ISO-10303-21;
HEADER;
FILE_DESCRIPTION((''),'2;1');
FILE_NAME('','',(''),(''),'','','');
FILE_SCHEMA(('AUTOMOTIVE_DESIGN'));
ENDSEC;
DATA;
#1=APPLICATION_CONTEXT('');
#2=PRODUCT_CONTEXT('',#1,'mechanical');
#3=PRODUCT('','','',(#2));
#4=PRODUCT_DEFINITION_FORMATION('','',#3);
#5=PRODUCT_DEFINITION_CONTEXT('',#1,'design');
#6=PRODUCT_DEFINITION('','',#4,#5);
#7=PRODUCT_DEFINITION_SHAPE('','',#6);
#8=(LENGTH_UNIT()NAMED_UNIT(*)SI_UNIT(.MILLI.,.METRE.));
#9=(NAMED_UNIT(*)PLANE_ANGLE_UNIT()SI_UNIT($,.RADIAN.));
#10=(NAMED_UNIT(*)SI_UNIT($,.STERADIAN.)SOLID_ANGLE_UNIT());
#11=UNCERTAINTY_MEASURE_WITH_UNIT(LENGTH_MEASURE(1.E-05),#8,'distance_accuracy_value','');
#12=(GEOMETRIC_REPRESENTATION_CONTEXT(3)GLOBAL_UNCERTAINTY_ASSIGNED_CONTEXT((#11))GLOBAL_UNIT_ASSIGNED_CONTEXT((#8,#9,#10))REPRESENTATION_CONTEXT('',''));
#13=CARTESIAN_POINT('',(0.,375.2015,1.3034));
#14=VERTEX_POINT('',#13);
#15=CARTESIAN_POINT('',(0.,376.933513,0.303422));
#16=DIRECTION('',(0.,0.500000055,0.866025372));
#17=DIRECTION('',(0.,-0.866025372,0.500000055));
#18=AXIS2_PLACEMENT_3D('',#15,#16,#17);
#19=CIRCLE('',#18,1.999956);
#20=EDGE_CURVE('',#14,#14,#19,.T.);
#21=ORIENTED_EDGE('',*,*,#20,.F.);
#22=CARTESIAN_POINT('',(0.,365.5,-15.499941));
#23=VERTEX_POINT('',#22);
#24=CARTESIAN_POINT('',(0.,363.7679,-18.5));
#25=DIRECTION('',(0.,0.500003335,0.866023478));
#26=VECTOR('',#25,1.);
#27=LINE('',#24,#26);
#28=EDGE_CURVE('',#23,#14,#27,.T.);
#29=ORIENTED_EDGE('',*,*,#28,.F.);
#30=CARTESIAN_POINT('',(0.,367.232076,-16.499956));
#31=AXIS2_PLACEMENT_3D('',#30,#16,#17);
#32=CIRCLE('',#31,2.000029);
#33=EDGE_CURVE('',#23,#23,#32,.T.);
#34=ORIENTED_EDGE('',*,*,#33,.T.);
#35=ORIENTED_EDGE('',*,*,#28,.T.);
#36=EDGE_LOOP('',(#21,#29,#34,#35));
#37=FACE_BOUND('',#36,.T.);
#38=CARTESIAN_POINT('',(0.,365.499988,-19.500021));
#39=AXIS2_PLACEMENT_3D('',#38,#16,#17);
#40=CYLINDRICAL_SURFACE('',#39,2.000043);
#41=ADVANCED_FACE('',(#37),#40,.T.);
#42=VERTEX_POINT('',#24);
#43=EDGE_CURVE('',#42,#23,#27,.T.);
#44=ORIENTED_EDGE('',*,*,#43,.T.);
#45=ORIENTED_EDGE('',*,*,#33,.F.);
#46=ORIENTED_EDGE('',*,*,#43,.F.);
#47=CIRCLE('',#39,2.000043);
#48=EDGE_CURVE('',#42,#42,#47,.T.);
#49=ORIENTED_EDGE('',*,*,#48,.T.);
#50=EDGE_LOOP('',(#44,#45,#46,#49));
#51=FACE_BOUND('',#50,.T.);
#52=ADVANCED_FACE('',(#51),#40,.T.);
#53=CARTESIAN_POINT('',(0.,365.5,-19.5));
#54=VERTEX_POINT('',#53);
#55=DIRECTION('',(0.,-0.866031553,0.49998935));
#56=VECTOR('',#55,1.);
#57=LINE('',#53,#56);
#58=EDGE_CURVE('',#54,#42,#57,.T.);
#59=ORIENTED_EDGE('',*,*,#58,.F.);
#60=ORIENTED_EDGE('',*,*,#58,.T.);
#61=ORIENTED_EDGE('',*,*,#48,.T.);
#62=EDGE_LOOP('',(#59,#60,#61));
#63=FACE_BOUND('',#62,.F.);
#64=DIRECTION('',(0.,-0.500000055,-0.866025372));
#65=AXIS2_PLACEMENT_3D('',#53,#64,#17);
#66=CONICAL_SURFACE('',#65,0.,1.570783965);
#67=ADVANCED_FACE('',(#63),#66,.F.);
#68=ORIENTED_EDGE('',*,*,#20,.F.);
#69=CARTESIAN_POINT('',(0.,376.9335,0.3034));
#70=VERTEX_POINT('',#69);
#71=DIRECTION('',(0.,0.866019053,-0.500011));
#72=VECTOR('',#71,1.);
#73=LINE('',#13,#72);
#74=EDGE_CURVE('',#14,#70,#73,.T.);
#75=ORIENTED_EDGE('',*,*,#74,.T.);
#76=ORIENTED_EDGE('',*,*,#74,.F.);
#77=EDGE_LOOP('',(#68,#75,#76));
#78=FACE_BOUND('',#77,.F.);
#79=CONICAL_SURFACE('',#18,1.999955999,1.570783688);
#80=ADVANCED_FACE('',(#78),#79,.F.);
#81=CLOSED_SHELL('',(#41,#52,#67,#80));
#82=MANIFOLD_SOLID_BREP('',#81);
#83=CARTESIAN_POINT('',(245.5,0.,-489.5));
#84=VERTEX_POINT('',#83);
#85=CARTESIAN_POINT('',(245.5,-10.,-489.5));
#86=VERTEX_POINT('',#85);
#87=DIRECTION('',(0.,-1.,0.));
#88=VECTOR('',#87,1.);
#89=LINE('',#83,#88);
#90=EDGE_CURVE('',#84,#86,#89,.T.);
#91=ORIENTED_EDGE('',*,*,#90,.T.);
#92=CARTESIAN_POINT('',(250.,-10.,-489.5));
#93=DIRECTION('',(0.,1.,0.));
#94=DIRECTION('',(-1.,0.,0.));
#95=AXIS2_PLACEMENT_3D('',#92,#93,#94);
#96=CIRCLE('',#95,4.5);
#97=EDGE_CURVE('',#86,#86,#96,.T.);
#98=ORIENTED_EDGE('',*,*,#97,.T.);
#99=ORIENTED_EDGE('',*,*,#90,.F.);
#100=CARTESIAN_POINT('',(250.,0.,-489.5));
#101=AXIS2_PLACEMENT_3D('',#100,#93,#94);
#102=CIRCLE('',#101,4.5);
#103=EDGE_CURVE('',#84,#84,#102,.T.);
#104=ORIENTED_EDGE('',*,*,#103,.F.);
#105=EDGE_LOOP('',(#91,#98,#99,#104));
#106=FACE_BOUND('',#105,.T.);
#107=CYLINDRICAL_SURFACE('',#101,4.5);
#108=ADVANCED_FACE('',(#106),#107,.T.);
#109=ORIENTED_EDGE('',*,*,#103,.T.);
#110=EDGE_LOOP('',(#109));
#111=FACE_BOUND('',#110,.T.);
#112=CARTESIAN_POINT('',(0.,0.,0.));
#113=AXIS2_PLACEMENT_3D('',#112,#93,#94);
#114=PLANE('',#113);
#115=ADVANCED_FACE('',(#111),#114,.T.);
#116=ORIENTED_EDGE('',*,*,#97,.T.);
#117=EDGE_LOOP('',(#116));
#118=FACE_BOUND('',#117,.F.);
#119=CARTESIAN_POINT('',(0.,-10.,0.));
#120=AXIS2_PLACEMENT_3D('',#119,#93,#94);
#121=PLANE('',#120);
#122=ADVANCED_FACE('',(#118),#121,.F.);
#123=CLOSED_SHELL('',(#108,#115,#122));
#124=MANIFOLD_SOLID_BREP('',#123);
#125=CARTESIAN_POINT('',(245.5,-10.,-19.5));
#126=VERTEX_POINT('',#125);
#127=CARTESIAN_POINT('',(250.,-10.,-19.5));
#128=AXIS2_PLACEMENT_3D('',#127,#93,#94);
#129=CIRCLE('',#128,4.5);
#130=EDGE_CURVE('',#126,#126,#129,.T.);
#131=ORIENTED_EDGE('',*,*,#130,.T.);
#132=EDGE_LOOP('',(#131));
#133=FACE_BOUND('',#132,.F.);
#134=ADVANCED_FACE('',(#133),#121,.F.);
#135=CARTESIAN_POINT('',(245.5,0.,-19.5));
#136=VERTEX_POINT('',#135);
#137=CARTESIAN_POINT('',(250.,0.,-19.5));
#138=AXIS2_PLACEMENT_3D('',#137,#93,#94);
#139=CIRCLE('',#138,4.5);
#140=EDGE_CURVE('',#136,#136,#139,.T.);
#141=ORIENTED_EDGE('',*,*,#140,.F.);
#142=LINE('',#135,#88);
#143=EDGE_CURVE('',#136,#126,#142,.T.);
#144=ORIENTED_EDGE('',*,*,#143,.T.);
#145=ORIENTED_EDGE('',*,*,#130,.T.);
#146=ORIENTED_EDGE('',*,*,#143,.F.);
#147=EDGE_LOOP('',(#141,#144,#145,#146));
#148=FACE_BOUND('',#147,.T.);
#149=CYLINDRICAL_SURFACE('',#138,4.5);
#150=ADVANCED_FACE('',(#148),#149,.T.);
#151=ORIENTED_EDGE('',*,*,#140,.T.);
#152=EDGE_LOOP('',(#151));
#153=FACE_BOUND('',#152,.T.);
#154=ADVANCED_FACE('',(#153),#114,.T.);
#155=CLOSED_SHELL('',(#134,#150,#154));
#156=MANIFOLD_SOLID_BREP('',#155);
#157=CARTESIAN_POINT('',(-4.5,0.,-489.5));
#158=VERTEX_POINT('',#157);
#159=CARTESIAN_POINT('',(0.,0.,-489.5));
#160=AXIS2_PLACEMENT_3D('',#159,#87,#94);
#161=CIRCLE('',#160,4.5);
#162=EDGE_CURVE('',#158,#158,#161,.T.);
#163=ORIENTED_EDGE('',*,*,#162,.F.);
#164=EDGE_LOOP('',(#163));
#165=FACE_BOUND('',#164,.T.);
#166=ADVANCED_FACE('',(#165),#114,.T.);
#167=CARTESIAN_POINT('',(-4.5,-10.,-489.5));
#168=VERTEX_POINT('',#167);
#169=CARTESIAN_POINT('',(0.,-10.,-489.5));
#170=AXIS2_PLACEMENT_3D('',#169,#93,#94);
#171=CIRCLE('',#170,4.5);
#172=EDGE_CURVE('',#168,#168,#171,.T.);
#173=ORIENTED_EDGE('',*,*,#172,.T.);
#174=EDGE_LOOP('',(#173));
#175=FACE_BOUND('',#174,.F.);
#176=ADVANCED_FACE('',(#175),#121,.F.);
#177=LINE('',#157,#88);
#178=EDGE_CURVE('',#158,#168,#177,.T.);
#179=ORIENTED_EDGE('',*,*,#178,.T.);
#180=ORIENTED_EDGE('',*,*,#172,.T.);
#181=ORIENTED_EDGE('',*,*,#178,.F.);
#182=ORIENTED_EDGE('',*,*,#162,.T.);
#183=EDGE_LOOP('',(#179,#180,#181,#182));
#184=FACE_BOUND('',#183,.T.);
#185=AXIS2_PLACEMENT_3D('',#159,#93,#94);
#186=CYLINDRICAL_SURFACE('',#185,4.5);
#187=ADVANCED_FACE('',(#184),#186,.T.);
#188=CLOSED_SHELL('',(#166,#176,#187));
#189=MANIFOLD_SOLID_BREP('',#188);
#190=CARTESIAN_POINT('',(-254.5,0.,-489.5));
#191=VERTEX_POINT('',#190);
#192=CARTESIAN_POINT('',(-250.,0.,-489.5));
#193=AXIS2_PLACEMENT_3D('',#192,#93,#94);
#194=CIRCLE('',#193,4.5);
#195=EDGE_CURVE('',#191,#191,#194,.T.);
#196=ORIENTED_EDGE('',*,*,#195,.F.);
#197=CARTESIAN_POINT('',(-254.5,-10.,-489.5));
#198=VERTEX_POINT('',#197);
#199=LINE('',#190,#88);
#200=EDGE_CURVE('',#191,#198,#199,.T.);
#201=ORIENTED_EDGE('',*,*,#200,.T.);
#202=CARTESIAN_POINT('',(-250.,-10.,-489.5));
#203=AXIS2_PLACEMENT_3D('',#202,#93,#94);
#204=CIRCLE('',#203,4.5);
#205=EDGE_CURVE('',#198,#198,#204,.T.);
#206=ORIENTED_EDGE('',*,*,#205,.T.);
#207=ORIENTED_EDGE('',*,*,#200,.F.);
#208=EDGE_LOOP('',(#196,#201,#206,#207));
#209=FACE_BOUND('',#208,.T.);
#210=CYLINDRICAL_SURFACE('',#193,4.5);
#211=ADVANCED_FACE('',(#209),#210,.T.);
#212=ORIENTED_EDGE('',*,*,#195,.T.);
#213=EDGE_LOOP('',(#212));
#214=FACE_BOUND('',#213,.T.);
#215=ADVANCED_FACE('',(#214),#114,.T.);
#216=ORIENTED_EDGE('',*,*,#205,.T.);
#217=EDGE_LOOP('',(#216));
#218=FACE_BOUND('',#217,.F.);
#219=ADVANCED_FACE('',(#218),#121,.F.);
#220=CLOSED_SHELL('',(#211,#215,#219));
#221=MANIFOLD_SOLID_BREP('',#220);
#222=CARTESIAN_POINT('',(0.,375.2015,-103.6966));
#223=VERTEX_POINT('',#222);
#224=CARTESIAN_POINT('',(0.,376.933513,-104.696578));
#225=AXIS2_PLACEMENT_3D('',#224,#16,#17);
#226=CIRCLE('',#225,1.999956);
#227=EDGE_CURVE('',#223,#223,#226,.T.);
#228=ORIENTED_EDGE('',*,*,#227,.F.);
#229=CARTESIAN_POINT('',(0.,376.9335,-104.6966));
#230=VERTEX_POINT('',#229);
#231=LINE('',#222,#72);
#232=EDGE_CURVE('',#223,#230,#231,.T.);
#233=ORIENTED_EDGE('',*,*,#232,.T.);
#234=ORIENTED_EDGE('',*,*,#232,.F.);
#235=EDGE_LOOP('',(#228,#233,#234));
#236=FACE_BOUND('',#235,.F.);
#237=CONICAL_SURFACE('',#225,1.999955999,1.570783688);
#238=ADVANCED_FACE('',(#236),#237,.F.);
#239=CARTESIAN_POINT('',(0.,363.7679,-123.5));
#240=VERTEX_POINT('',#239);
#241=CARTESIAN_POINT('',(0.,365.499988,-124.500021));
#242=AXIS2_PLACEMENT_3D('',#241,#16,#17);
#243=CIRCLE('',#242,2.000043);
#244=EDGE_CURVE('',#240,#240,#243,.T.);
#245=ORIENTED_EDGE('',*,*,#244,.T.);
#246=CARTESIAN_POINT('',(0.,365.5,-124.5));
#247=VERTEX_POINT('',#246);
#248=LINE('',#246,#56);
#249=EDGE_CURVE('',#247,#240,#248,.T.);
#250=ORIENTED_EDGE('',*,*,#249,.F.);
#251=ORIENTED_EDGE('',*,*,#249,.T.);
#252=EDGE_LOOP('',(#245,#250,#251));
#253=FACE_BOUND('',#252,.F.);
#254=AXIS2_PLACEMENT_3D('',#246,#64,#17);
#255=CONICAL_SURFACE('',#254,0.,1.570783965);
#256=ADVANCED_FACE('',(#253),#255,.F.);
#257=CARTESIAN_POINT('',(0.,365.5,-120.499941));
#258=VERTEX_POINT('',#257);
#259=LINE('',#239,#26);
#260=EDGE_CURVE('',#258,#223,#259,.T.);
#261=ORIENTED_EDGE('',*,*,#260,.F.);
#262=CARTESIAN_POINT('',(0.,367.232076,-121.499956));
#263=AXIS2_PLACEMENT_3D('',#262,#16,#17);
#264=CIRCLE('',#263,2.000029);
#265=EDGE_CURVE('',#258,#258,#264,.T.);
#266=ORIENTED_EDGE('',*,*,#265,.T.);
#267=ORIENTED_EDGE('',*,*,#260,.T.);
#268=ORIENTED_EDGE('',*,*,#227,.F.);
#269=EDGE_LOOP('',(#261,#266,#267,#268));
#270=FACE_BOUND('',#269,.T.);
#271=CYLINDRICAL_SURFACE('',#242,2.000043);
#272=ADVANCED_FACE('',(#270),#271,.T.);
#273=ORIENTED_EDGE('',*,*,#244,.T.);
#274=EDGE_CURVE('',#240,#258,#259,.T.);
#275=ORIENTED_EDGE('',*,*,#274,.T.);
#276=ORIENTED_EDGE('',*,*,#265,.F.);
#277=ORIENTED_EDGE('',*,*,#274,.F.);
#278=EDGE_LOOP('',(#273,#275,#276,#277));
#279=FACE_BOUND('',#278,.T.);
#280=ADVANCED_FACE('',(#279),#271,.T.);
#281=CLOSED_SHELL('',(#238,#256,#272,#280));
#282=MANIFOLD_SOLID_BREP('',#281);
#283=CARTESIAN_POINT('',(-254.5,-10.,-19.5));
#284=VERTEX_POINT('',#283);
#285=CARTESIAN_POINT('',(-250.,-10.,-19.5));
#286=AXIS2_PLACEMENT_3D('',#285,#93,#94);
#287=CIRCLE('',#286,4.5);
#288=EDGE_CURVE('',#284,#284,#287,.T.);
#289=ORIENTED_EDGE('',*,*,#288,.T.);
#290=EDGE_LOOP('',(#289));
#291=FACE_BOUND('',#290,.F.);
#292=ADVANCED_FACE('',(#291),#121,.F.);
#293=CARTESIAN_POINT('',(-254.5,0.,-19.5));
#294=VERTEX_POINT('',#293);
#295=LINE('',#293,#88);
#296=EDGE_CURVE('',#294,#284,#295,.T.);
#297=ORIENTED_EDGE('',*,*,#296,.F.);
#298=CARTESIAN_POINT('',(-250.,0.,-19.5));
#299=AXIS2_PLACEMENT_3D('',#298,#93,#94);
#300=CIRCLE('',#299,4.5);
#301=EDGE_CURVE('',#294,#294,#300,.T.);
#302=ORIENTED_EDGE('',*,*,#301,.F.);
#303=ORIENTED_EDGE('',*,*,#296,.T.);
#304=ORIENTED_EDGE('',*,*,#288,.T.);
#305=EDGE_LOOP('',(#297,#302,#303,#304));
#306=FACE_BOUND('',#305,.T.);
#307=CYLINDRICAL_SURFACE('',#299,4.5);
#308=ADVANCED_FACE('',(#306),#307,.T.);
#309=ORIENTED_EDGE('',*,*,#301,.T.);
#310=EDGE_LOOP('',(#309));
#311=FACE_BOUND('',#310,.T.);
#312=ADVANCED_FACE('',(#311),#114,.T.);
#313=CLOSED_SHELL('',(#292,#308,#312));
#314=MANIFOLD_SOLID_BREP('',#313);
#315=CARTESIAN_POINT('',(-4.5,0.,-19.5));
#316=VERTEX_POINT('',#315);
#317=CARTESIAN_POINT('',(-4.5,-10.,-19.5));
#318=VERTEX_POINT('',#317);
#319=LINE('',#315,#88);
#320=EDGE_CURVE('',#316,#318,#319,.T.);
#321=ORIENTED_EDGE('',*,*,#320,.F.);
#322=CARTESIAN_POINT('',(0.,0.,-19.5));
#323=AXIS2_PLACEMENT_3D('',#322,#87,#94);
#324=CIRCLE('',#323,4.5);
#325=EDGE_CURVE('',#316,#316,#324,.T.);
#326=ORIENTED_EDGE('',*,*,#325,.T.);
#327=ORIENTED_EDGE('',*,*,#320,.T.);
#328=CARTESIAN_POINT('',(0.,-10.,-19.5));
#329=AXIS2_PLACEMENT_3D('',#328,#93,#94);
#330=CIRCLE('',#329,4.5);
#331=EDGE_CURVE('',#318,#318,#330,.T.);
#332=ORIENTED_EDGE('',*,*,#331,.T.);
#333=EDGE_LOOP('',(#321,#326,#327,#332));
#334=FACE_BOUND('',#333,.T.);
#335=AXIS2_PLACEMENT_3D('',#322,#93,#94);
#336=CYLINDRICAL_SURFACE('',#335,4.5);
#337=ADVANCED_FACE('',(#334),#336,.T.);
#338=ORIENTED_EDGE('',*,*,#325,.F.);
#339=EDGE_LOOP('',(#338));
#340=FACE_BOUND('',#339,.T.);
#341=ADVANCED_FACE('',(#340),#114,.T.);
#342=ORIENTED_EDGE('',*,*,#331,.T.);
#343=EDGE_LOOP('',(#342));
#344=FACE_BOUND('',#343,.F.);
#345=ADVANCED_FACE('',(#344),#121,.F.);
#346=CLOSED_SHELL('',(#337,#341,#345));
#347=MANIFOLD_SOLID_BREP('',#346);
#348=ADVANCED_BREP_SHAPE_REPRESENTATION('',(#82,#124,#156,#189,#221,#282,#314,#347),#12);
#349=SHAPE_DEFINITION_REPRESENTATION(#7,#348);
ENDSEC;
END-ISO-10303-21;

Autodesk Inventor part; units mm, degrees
ref_plane "YZ Plane" through (0, 0, 0) normal (1, 0, 0) x (0, 1, 0)
ref_plane "XY Plane" through (0, 0, 0) normal (0, 0, 1) x (1, 0, 0)
sketch "S-Orientierung" plane through (0, 0, 0) normal (0, 1, 0) x (-1, 0, 0)
  line L0 (290.75, 0) -> (-290.75, 0)
  line L1 (-290.75, 0) -> (-290.75, -564.4)
  line L2 (-290.75, -564.4) -> (290.75, -564.4)
  line L3 (290.75, -564.4) -> (290.75, 0)
  line L4 (0, -718.1) -> (0, 161.1) construction
  line L5 (-448, 0) -> (448, 0) construction
  line L6 (320, 35.5) -> (-320, 35.5)
  line L7 (-320, 35.5) -> (-320, -592.5)
  line L8 (-320, -592.5) -> (320, -592.5)
  line L9 (320, -592.5) -> (320, 35.5)
  point P0 (0, 0)
  point P1 (0, -19.5)
  point P2 (0, -124.5)
  dimension "d2" = 640
  dimension "d3" = 628
  dimension "d4" = 35.5
  dimension "d67" = 55
  dimension "d87" = 29.25
  dimension "d88" = 28.1
  dimension "d89" = 564.4
  dimension "d90" = 581.5
  dimension "d105" = 160
surface extrude "Ex-Innenseiten-4040-Profile" sketch "S-Orientierung" along normal mid plane 40 shown no curves L6 L7 L8 L9
ref_plane "Deckenebene" through (0, 365.5, 0) normal (0, 1, 0) x (-1, 0, 0)
sketch "HF-Anschlusspunkte" plane through (0, 0, 0) normal (0, 1, 0) x (-1, 0, 0)
  line L0 (40, -12) -> (-40, -12)
  line L1 (-40, -12) -> (-40, -93.7)
  line L2 (-40, -93.7) -> (40, -93.7)
  line L3 (40, -93.7) -> (40, -12)
  line L4 (-25, -12) -> (-25, -93.7) construction
  line L5 (25, -93.7) -> (25, -12) construction
  circle A0 centre (0, -19.5) radius 4.5
  line L6 (320, 35.5) -> (-320, 35.5) construction
  line L7 (0, -718.1) -> (0, 161.1) projected
  line L8 (40, -482) -> (-40, -482)
  line L9 (-40, -482) -> (-40, -563.7)
  line L10 (-40, -563.7) -> (40, -563.7)
  line L11 (40, -563.7) -> (40, -482)
  line L12 (-25, -482) -> (-25, -563.7) construction
  line L13 (25, -563.7) -> (25, -482) construction
  circle A1 centre (0, -489.5) radius 4.5
  line L14 (-320, -592.5) -> (320, -592.5) projected
  line L15 (296.8699, -564.4) -> (-360.8589, -564.4) construction
  line L16 (-290.75, -592.5) -> (-290.75, 35.5) construction
  line L17 (-320, 35.5) -> (-320, -592.5) construction
  line L18 (-210, -482) -> (-290, -482)
  circle A2 centre (-250, -489.5) radius 4.5
  line L19 (-275, -482) -> (-275, -563.7) construction
  line L20 (-290, -482) -> (-290, -563.7)
  line L21 (-210, -563.7) -> (-210, -482)
  line L22 (-290, -563.7) -> (-210, -563.7)
  line L23 (-225, -563.7) -> (-225, -482) construction
  line L24 (-225, -93.7) -> (-225, -12) construction
  line L25 (-210, -93.7) -> (-210, -12)
  line L26 (-210, -12) -> (-290, -12)
  line L27 (-290, -93.7) -> (-210, -93.7)
  circle A3 centre (-250, -19.5) radius 4.5
  line L28 (-275, -12) -> (-275, -93.7) construction
  line L29 (-290, -12) -> (-290, -93.7)
  line L30 (210, -482) -> (290, -482)
  circle A4 centre (250, -489.5) radius 4.5
  line L31 (275, -482) -> (275, -563.7) construction
  line L32 (290, -482) -> (290, -563.7)
  line L33 (210, -563.7) -> (210, -482)
  line L34 (290, -563.7) -> (210, -563.7)
  line L35 (225, -563.7) -> (225, -482) construction
  line L36 (225, -93.7) -> (225, -12) construction
  line L37 (210, -93.7) -> (210, -12)
  line L38 (210, -12) -> (290, -12)
  line L39 (290, -93.7) -> (210, -93.7)
  circle A5 centre (250, -19.5) radius 4.5
  line L40 (275, -12) -> (275, -93.7) construction
  line L41 (290, -12) -> (290, -93.7)
  line L42 (290.75, -592.5) -> (290.75, 35.5) construction
  point P0 (0, 0)
  point P1 (0, -93.7)
  point P2 (0, -470)
  point P3 (0, -563.7)
  point P4 (-250, -470)
  point P5 (-250, -563.7)
  point P6 (-250, -93.7)
  point P7 (-250, 0)
  point P8 (250, -470)
  point P9 (250, -563.7)
  point P10 (250, -93.7)
  point P11 (250, 0)
  point P12 (40, -522.85)
  point P13 (40, -52.85)
  point P14 (-250, -482)
  dimension "d68" = 80
  dimension "d69" = 81.7
  dimension "d70" = 15
  dimension "d71" = 15
  dimension "d72" = 40
  dimension "d73" = 7.5
  dimension "d74" = 9
  dimension "d75" = 47.5
  dimension "d79" = 470
  dimension "d84" = 28.8
  dimension "d85" = 28.1
  dimension "d86" = 29.25
  dimension "d93" = 250
  dimension "d98" = 470
  dimension "d99" = 500
  dimension "d109" = 55
ref_plane "KnickHöhe-HF-Kabel" through (0, 109, 0) normal (0, 1, 0) x (-1, 0, 0)
extrude "Ex-HF-Probeanschlüsse" add sketch "HF-Anschlusspunkte" against normal blind 10 contours L7 A0 | A0 L7 | A1 L7 | L7 A1 | A2 | A3 | A4 | A5
sketch "S-HF-Kabeleinlass" plane through (0, 0, 0) normal (1, 0, 0) x (0, 1, 0)
  line L0 (-75.3867, -19.5) -> (452.3202, -19.5) projected
  line L1 (365.5, 100.2641) -> (365.5, -592.4607) projected
  line L2 (365.5, -19.5) -> (365.5, -19.5) construction
  line L3 (365.5, -19.5) -> (376.9335, 0.3034)
  line L4 (365.5, -19.5) -> (363.7679, -18.5)
  line L5 (363.7679, -18.5) -> (375.2015, 1.3034)
  line L6 (375.2015, 1.3034) -> (376.9335, 0.3034)
  point P0 (0, 0)
  dimension "d102" = 30
  dimension "d104" = 2
revolve "Um-HF-Kabeleinlass" add sketch "S-HF-Kabeleinlass" angle 360 about axis through (0, 365.5, -19.5) along (0, 0.5, 0.8660254) separate body
sketch "S-KabelKnickPunkte" plane through (0, 109, 0) normal (0, 1, 0) x (-1, 0, 0)
  circle A0 centre (0, -19.5) radius 4.5 projected
  circle A1 centre (-250, -19.5) radius 4.5 projected
  circle A2 centre (-250, -489.5) radius 4.5 projected
  circle A3 centre (0, -489.5) radius 4.5 projected
  circle A4 centre (250, -489.5) radius 4.5 projected
  circle A5 centre (250, -19.5) radius 4.5 projected
pattern_linear "Rechteckige Anordnung3" count 2 spacing 105 along (0, 0, -1) bodies 2
equation "\"d71\" = d70"
properties part number "HF-Kabelführung-V3-XGantry-LängenSkizze"
